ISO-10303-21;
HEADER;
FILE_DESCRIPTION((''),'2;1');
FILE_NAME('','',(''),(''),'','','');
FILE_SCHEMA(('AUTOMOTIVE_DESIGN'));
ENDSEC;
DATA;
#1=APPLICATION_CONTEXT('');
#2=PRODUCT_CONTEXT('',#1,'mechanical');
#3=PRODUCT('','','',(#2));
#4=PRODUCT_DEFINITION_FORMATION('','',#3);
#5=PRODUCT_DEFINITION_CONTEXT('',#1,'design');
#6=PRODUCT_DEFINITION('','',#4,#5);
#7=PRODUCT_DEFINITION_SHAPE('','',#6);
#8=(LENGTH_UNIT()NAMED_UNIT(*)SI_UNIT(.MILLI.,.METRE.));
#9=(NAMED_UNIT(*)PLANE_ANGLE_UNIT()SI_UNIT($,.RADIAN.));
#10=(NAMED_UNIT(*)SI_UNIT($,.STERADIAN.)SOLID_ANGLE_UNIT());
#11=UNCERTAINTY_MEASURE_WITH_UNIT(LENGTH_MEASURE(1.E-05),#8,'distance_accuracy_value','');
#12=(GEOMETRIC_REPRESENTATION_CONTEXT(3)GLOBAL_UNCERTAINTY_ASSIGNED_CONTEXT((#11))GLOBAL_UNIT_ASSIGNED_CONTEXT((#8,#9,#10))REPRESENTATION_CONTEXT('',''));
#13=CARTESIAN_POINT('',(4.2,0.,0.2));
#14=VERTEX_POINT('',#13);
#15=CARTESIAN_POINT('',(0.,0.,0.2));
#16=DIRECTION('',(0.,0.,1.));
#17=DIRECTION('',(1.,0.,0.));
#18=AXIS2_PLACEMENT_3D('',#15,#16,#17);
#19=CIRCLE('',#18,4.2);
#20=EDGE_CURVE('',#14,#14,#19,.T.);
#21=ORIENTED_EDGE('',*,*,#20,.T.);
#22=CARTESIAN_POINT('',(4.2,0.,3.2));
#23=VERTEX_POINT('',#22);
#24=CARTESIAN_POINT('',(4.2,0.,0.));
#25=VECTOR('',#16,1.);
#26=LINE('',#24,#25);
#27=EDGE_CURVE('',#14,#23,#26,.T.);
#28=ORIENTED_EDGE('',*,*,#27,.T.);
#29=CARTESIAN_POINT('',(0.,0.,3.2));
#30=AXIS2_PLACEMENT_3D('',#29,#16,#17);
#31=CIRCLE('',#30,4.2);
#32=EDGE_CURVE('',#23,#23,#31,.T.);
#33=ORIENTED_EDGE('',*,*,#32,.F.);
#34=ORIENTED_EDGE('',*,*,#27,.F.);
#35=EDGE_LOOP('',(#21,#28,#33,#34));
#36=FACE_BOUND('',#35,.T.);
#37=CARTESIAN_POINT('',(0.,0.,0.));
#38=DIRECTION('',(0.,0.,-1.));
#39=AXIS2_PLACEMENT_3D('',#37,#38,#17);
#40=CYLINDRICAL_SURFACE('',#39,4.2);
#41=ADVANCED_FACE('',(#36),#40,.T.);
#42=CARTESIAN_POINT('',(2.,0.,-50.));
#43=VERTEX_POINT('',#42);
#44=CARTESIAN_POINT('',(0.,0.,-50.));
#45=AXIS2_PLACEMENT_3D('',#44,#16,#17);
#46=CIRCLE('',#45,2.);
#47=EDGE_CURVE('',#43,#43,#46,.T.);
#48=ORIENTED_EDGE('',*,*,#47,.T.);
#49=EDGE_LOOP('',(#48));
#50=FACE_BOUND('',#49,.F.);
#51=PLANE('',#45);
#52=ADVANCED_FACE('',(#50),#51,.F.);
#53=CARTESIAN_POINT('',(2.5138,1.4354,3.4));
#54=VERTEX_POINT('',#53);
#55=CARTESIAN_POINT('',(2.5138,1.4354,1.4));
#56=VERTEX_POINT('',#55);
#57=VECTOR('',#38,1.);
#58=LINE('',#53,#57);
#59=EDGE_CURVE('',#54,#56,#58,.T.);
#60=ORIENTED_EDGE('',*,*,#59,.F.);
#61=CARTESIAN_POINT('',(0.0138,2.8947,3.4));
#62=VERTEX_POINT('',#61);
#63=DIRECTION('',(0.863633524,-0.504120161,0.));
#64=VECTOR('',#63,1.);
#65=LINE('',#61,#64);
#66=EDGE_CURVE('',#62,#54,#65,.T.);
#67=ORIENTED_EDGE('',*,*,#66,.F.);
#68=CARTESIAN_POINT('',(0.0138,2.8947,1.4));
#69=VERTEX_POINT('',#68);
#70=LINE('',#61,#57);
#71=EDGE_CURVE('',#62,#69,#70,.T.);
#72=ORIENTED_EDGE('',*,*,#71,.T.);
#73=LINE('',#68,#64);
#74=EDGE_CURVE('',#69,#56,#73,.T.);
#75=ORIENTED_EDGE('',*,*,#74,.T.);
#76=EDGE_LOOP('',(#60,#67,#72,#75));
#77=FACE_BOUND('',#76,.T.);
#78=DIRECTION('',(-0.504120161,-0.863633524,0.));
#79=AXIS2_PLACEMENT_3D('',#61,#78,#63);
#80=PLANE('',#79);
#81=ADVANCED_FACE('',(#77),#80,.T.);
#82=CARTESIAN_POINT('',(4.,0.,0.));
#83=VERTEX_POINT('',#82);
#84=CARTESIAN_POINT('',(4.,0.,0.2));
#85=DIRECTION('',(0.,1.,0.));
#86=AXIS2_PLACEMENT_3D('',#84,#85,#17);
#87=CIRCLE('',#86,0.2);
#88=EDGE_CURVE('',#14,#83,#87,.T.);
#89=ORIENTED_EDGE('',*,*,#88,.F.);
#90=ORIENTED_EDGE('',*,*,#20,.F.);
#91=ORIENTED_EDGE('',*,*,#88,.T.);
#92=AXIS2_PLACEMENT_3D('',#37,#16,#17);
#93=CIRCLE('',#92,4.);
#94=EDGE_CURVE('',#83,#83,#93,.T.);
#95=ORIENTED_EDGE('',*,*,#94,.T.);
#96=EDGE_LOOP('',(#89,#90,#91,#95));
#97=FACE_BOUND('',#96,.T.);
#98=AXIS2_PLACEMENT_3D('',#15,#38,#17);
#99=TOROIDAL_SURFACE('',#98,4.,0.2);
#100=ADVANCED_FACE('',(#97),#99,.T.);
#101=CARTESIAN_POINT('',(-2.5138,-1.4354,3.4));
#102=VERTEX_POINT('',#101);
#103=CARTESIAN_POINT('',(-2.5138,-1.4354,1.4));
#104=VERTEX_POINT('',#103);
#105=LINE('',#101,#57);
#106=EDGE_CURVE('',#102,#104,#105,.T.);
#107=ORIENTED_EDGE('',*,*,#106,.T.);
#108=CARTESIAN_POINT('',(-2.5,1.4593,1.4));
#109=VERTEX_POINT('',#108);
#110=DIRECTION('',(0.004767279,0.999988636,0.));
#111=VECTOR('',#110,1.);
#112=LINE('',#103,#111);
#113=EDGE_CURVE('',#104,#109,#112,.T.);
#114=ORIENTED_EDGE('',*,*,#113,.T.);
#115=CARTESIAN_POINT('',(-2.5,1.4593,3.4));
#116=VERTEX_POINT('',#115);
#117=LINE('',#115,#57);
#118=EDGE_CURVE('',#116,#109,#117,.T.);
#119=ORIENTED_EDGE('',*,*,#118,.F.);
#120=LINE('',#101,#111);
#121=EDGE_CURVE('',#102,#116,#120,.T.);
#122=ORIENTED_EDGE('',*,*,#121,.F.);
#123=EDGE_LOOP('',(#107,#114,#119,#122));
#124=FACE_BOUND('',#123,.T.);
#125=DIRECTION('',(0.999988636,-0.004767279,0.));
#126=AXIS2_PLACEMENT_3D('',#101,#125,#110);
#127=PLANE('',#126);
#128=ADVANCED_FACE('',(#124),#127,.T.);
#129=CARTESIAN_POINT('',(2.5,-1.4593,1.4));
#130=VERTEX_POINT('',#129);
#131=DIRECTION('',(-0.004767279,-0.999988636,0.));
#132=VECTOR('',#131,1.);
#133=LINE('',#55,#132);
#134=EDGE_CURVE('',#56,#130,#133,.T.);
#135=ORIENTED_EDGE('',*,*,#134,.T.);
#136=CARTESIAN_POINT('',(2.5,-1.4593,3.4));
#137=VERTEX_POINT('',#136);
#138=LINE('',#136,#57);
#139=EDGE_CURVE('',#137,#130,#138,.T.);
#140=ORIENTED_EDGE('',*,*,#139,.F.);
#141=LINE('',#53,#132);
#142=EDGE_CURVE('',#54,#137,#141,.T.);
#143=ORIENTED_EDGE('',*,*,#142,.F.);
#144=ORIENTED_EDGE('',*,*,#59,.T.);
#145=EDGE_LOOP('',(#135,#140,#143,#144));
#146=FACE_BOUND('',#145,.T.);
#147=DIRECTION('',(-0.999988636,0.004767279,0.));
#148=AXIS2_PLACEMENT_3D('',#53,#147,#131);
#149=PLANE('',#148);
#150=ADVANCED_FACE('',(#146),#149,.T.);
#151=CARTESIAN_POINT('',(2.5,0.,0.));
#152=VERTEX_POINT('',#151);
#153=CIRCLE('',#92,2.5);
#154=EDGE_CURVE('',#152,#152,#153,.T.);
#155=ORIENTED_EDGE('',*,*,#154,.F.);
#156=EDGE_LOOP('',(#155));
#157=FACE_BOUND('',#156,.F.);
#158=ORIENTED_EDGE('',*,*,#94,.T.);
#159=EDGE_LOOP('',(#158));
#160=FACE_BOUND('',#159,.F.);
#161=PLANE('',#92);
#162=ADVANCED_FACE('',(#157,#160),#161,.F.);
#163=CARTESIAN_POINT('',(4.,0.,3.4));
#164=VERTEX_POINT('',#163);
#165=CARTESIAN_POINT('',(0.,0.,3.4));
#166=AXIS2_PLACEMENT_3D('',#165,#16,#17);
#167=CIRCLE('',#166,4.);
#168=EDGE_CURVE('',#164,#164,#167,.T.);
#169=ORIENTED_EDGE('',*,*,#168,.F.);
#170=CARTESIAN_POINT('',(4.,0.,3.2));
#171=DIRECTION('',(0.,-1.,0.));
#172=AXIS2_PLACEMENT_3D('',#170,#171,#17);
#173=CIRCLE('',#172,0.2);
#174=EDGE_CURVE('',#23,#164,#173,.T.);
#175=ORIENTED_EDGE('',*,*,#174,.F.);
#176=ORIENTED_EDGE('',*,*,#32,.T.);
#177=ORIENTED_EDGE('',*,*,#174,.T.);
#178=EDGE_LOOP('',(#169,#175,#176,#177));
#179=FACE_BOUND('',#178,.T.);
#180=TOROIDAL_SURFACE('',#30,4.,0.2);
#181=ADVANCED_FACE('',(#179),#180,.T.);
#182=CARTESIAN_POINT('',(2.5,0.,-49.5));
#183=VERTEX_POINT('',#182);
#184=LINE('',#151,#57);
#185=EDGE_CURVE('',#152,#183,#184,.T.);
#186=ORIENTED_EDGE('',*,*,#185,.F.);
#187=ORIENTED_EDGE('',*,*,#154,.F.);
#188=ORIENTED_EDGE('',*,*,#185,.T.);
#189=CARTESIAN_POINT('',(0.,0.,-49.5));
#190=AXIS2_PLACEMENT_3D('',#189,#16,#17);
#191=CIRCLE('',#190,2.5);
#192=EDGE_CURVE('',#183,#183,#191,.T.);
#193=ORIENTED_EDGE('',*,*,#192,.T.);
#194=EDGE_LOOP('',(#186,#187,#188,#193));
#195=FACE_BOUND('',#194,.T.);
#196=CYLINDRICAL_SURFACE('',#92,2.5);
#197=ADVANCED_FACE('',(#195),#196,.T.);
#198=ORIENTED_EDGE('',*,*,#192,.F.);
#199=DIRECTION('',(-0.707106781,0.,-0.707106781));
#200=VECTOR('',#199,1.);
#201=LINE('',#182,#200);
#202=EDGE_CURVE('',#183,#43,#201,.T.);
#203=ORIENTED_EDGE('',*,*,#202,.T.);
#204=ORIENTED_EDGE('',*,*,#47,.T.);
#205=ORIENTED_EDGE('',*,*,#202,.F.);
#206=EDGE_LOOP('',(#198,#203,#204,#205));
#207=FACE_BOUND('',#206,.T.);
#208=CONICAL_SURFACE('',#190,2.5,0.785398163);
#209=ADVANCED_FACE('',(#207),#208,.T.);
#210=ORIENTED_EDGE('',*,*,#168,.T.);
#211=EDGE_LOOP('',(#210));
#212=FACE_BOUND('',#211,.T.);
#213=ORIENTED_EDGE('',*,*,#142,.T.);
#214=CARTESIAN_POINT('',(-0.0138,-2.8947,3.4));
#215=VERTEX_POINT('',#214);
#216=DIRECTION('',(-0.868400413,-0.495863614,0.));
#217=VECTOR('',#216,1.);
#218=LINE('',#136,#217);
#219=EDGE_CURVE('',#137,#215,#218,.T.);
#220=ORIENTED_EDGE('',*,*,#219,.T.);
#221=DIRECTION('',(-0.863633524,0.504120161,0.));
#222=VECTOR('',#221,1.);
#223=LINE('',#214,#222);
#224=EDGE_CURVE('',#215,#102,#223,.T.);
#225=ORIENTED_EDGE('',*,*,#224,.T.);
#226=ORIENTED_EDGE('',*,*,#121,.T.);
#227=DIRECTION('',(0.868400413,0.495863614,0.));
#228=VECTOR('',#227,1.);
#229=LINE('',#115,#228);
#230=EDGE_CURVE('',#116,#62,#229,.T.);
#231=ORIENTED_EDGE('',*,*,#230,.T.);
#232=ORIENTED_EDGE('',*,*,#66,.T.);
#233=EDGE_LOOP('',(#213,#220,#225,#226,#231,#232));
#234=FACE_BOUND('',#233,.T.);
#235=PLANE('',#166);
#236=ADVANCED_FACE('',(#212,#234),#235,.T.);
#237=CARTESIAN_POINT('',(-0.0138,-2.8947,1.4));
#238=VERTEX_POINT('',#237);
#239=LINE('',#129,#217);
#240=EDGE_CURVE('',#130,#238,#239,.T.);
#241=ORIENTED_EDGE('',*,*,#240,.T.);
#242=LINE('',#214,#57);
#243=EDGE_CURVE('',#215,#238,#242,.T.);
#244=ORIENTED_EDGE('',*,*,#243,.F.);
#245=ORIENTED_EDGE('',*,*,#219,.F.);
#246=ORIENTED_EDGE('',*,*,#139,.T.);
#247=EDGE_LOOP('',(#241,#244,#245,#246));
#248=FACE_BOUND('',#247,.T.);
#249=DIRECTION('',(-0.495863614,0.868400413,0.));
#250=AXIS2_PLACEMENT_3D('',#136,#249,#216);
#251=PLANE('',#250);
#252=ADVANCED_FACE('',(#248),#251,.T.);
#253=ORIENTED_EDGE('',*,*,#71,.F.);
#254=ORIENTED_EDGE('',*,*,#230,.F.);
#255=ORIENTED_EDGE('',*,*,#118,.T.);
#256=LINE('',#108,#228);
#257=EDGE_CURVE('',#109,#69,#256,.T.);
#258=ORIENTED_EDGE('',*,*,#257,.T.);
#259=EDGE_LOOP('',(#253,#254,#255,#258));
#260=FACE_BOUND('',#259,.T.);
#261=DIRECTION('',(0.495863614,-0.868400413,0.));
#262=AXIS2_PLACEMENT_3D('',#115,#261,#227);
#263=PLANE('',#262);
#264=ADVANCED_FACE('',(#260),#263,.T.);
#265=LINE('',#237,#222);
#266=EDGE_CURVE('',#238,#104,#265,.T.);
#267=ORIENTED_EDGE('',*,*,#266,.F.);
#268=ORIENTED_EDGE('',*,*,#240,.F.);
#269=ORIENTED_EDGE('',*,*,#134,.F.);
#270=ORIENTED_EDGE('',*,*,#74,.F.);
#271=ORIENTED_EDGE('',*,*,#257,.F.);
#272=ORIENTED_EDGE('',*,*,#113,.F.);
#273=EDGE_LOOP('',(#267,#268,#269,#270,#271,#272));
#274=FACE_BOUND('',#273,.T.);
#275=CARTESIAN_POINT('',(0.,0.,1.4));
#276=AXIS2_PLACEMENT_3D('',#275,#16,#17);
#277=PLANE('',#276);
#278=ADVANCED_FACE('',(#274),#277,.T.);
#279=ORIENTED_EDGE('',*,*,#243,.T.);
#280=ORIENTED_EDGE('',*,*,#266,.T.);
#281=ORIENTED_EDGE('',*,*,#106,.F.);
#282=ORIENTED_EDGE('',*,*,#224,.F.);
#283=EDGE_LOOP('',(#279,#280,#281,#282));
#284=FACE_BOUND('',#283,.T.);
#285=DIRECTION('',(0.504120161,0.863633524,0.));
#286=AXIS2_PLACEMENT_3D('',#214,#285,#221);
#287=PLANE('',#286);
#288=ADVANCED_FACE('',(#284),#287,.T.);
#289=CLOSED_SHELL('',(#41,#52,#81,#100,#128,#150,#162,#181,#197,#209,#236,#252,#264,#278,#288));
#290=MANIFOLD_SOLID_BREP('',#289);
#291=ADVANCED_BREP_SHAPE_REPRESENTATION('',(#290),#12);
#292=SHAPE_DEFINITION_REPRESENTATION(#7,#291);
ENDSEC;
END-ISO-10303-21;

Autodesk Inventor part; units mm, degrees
ref_plane "YZ Plane" through (0, 0, 0) normal (1, 0, 0) x (0, 1, 0)
ref_plane "XZ Plane" through (0, 0, 0) normal (0, 1, 0) x (-1, 0, 0)
ref_plane "XY Plane" through (0, 0, 0) normal (0, 0, 1) x (1, 0, 0)
sketch "Sketch1" plane through (0, 0, 0) normal (0, 0, 1) x (1, 0, 0)
  circle A0 centre (0, 0) radius 4.2
  circle A1 centre (0, 0) radius 2.5
  dimension "d0" = 8.4
  dimension "d3" = 5
extrude "Extrusion1" add sketch "Sketch1" along normal blind 3.4 contours A0 | A1
extrude "Extrusion2" add sketch "Sketch1" against normal blind 50 contours A1
thread "Thread1" size "M5x0.8" class "6g" standard "ANSI Metric M Profile" length 17.5
fillet "Fillet1" radius 0.2 2 edges at (-4.2, 0, 3.4) (-4.2, 0, 0)
chamfer "Chamfer1" distance 0.5 angle 45 1 edges at (-2.5, 0, -50)
sketch "Sketch2" plane through (0, 0, 3.4) normal (0, 0, 1) x (1, 0, 0)
  line L0 (-2.5, 1.4593) -> (0.0138, 2.8947)
  line L1 (0.0138, 2.8947) -> (2.5138, 1.4354)
  line L2 (2.5138, 1.4354) -> (2.5, -1.4593)
  line L3 (2.5, -1.4593) -> (-0.0138, -2.8947)
  line L4 (-0.0138, -2.8947) -> (-2.5138, -1.4354)
  line L5 (-2.5138, -1.4354) -> (-2.5, 1.4593)
  point P0 (0, 0)
  point P1 (0, 0)
extrude "Extrusion3" cut sketch "Sketch2" against normal blind 2
properties part number "COTS_GENERIC_M5x50_Screw" material "Steel, Carbon"
